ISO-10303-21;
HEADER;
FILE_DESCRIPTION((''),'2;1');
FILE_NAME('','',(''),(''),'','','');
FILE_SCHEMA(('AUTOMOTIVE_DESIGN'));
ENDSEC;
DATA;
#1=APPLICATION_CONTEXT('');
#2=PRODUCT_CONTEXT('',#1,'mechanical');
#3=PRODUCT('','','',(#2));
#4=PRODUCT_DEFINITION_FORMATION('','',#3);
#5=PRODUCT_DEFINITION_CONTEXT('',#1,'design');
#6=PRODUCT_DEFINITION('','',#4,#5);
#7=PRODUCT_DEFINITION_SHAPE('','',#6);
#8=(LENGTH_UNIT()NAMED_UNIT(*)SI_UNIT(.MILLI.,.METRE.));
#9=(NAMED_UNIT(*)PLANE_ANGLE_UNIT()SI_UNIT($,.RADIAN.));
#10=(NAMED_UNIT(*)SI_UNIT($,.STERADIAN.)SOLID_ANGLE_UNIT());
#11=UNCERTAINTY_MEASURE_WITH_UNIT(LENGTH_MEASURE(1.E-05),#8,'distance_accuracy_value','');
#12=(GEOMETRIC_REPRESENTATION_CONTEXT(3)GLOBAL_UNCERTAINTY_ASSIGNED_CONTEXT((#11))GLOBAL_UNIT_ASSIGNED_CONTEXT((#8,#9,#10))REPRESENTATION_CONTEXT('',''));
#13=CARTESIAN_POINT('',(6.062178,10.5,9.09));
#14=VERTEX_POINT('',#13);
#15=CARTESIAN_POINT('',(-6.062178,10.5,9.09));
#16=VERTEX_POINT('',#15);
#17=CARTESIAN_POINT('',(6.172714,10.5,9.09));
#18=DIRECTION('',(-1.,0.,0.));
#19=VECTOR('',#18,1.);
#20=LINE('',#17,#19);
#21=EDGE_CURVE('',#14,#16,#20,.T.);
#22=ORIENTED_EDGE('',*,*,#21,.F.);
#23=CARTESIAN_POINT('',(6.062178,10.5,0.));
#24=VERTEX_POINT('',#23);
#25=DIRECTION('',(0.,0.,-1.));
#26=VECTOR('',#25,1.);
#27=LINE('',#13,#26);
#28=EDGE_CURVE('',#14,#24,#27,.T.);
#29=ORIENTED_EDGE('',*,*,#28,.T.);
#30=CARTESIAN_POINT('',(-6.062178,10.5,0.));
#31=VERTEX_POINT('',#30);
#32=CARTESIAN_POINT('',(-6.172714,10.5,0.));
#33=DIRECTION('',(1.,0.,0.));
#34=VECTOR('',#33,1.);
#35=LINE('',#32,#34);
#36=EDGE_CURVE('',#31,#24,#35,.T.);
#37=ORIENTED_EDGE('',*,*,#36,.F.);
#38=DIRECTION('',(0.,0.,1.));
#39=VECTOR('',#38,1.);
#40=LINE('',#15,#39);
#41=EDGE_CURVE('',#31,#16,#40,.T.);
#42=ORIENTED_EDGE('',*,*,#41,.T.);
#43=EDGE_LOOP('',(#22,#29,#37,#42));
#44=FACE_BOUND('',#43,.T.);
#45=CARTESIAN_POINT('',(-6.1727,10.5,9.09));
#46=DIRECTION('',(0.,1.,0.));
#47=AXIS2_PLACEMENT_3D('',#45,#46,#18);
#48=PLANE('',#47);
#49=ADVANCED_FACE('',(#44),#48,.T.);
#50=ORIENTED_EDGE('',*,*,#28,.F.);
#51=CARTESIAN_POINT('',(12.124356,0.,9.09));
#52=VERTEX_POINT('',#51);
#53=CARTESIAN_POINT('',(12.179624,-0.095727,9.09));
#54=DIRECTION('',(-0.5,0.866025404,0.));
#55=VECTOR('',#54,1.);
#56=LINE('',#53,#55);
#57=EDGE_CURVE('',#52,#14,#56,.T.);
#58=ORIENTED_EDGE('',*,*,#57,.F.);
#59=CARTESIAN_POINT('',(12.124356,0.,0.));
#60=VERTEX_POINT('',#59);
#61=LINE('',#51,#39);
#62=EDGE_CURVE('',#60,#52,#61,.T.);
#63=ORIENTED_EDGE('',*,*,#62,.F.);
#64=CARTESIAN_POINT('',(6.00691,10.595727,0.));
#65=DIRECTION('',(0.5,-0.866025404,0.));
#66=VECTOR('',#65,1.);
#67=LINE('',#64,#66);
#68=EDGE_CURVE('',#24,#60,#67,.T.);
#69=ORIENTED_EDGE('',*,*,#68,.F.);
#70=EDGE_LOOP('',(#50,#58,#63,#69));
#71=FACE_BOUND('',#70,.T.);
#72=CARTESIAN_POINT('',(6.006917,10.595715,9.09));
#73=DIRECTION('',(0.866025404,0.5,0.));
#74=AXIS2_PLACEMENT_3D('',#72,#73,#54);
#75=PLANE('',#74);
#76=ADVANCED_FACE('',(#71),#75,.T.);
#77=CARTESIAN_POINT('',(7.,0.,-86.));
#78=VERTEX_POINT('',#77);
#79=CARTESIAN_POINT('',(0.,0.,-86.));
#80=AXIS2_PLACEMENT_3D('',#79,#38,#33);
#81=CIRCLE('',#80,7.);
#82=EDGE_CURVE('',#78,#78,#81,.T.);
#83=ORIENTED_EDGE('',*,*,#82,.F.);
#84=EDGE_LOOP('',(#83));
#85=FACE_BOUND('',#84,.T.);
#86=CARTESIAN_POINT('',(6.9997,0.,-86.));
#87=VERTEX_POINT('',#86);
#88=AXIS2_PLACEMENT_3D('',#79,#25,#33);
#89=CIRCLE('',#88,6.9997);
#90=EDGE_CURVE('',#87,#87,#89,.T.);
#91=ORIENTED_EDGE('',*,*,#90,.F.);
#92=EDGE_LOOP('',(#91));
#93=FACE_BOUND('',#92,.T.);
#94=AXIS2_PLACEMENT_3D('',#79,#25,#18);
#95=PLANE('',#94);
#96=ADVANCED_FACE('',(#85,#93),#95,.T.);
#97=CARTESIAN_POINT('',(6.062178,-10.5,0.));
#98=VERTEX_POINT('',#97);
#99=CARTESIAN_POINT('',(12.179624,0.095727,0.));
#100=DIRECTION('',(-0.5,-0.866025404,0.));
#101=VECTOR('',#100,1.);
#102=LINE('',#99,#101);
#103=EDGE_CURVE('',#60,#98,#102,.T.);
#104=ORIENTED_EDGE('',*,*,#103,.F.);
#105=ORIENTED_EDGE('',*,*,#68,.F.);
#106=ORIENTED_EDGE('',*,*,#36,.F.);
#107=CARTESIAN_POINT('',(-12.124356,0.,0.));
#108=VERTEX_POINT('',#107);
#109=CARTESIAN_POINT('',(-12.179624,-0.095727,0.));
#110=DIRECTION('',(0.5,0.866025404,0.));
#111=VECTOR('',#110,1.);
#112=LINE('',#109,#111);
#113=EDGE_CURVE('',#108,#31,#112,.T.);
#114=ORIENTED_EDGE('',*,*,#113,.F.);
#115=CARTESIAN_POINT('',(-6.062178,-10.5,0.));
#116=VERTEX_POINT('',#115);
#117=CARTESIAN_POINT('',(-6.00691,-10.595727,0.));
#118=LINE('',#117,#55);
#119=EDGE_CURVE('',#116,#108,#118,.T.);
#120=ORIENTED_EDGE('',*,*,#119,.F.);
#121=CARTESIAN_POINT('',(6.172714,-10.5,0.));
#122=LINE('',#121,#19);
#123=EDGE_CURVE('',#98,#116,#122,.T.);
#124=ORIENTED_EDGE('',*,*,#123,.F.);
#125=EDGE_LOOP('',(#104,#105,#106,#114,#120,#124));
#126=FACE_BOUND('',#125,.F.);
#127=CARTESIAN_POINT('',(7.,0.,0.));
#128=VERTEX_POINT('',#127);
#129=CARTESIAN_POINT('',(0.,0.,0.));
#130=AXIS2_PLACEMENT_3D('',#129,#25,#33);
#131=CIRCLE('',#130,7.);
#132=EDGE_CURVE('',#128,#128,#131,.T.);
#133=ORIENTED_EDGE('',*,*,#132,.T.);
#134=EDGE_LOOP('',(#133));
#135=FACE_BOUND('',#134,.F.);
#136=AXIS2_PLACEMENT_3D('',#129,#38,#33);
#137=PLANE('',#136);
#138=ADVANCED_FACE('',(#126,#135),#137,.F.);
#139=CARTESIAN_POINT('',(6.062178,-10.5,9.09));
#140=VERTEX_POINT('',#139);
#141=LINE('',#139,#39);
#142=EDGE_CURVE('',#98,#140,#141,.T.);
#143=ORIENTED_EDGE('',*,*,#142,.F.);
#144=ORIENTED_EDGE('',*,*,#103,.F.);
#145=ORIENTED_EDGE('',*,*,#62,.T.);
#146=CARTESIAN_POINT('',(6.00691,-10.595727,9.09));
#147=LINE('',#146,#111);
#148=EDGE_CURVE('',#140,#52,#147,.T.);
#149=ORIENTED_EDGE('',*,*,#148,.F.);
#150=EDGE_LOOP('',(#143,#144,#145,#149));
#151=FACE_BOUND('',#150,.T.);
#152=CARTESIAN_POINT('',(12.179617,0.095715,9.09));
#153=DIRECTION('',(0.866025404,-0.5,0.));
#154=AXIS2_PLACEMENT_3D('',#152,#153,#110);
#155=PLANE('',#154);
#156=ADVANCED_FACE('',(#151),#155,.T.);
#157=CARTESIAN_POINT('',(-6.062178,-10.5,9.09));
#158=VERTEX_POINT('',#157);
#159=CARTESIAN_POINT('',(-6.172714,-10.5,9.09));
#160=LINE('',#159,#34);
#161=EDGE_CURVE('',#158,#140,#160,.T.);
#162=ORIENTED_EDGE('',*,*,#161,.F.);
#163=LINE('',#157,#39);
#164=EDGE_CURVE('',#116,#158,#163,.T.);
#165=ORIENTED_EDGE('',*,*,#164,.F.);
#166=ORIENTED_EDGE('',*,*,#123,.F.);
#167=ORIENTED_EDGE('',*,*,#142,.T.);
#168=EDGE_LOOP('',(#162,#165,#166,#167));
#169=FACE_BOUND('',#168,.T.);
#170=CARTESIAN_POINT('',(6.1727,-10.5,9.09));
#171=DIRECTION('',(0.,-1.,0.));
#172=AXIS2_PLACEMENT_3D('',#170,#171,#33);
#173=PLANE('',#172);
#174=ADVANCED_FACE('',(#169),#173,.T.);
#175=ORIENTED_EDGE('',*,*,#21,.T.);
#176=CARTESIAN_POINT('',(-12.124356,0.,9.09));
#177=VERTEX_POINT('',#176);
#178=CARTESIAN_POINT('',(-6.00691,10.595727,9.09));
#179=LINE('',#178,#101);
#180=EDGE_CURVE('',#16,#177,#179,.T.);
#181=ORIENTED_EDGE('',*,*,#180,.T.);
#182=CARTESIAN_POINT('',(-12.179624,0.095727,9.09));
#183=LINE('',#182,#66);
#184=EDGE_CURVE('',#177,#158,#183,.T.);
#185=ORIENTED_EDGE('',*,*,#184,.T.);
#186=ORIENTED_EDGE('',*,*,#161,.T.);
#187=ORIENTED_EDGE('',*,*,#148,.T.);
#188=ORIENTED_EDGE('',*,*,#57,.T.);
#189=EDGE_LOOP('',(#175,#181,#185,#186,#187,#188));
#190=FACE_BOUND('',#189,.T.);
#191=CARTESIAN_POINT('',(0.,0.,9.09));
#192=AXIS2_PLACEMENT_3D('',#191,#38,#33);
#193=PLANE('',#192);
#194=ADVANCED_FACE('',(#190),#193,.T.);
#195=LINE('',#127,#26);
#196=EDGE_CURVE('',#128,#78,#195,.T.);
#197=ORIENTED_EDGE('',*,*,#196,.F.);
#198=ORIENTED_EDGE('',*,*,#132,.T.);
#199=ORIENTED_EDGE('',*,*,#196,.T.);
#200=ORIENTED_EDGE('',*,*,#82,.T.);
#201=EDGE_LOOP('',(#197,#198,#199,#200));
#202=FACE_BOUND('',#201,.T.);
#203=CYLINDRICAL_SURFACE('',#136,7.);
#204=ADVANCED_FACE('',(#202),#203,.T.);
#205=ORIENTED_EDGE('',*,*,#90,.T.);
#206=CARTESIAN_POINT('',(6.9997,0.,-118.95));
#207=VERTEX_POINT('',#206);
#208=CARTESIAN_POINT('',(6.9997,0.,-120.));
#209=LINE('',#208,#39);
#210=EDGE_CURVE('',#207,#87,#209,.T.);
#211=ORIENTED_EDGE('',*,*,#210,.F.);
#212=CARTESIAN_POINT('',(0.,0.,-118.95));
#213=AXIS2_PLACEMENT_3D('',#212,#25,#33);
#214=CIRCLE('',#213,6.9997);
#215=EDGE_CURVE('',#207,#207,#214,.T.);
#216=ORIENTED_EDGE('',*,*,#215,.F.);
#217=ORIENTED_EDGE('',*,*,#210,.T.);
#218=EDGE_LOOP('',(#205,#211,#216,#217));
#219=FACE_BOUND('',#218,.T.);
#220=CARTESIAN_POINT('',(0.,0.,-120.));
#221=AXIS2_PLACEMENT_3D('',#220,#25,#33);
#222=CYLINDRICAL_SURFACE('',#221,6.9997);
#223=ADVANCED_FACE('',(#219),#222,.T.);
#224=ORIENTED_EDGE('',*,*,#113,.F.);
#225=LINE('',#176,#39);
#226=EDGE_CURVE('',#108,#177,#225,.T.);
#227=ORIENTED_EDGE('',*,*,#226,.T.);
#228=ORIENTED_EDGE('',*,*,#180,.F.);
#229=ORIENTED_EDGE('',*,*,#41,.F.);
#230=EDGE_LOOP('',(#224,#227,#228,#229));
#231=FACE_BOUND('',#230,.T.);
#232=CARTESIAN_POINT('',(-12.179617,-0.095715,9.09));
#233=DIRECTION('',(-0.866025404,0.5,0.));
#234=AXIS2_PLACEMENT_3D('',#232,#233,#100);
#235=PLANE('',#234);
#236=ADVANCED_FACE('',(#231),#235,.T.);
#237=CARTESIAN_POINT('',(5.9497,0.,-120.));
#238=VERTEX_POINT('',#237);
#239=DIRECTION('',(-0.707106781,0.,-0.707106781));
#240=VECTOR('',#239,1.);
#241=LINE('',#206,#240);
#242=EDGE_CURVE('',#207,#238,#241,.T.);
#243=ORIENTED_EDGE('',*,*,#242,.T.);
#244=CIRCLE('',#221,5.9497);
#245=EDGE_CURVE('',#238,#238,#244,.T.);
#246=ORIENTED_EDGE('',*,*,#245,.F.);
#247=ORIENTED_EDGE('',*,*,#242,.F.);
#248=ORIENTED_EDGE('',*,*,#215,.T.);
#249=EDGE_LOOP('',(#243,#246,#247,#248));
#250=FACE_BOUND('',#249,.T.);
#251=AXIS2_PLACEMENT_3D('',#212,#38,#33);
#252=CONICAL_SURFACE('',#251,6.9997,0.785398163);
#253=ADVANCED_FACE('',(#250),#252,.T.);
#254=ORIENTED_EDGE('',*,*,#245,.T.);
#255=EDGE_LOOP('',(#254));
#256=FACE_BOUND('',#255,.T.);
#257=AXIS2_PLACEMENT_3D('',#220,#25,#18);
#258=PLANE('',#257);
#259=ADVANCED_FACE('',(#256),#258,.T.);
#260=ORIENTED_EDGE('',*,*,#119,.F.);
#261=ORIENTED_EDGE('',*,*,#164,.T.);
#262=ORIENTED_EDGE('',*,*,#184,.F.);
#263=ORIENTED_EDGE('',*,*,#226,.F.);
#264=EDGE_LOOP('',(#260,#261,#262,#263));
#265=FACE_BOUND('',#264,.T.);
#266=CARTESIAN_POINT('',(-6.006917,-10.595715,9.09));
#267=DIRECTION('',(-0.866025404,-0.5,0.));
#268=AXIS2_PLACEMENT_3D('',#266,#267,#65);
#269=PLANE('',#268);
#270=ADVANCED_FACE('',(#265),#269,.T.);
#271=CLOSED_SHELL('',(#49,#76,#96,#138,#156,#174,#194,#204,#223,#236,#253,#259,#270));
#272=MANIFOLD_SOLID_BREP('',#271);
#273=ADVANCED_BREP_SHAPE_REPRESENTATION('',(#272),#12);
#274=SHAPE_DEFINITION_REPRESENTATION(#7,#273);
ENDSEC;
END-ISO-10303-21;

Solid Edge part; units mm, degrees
sketch "Sketch1" plane through (0, 0, 0) normal (0, 0, 1) x (1, 0, 0)
  circle A0 centre (0, 0) radius 12.18
  dimension "D1" = 24.36
extrude "Protrusion1" add sketch "Sketch1" along normal blind 9.09
sketch "Sketch2" plane through (0, 0, 0) normal (0, 0, -1) x (1, 0, 0)
  circle A0 centre (0, 0) radius 7
extrude "Protrusion2" add sketch "Sketch2" along normal blind 120
sketch "Sketch3" plane through (0, 0, -120) normal (0, 0, -1) x (1, 0, 0)
  circle A0 centre (0, 0) radius 6.9997
extrude "Cutout1" cut sketch "Sketch3" against normal blind 34 flip side to cut
chamfer "Chamfer_1" distance 1.05 angle 45 1 edges at (-6.9997, 0, -120)
sketch "Sketch4" plane through (0, 0, 9.09) normal (0, 0, 1) x (1, 0, 0)
  line L0 (-6.1727, 10.5) -> (6.1727, 10.5)
  dimension "D1" = 21
extrude "Cutout2" cut sketch "Sketch4" against normal up to next material side at (0, 10.55, 9.09)
pattern_circular "Pattern1" count 6 over 360 about axis through (0, 0, 9.09) along (0, 0, 1) of "Cutout2"
properties part number "24101441"
